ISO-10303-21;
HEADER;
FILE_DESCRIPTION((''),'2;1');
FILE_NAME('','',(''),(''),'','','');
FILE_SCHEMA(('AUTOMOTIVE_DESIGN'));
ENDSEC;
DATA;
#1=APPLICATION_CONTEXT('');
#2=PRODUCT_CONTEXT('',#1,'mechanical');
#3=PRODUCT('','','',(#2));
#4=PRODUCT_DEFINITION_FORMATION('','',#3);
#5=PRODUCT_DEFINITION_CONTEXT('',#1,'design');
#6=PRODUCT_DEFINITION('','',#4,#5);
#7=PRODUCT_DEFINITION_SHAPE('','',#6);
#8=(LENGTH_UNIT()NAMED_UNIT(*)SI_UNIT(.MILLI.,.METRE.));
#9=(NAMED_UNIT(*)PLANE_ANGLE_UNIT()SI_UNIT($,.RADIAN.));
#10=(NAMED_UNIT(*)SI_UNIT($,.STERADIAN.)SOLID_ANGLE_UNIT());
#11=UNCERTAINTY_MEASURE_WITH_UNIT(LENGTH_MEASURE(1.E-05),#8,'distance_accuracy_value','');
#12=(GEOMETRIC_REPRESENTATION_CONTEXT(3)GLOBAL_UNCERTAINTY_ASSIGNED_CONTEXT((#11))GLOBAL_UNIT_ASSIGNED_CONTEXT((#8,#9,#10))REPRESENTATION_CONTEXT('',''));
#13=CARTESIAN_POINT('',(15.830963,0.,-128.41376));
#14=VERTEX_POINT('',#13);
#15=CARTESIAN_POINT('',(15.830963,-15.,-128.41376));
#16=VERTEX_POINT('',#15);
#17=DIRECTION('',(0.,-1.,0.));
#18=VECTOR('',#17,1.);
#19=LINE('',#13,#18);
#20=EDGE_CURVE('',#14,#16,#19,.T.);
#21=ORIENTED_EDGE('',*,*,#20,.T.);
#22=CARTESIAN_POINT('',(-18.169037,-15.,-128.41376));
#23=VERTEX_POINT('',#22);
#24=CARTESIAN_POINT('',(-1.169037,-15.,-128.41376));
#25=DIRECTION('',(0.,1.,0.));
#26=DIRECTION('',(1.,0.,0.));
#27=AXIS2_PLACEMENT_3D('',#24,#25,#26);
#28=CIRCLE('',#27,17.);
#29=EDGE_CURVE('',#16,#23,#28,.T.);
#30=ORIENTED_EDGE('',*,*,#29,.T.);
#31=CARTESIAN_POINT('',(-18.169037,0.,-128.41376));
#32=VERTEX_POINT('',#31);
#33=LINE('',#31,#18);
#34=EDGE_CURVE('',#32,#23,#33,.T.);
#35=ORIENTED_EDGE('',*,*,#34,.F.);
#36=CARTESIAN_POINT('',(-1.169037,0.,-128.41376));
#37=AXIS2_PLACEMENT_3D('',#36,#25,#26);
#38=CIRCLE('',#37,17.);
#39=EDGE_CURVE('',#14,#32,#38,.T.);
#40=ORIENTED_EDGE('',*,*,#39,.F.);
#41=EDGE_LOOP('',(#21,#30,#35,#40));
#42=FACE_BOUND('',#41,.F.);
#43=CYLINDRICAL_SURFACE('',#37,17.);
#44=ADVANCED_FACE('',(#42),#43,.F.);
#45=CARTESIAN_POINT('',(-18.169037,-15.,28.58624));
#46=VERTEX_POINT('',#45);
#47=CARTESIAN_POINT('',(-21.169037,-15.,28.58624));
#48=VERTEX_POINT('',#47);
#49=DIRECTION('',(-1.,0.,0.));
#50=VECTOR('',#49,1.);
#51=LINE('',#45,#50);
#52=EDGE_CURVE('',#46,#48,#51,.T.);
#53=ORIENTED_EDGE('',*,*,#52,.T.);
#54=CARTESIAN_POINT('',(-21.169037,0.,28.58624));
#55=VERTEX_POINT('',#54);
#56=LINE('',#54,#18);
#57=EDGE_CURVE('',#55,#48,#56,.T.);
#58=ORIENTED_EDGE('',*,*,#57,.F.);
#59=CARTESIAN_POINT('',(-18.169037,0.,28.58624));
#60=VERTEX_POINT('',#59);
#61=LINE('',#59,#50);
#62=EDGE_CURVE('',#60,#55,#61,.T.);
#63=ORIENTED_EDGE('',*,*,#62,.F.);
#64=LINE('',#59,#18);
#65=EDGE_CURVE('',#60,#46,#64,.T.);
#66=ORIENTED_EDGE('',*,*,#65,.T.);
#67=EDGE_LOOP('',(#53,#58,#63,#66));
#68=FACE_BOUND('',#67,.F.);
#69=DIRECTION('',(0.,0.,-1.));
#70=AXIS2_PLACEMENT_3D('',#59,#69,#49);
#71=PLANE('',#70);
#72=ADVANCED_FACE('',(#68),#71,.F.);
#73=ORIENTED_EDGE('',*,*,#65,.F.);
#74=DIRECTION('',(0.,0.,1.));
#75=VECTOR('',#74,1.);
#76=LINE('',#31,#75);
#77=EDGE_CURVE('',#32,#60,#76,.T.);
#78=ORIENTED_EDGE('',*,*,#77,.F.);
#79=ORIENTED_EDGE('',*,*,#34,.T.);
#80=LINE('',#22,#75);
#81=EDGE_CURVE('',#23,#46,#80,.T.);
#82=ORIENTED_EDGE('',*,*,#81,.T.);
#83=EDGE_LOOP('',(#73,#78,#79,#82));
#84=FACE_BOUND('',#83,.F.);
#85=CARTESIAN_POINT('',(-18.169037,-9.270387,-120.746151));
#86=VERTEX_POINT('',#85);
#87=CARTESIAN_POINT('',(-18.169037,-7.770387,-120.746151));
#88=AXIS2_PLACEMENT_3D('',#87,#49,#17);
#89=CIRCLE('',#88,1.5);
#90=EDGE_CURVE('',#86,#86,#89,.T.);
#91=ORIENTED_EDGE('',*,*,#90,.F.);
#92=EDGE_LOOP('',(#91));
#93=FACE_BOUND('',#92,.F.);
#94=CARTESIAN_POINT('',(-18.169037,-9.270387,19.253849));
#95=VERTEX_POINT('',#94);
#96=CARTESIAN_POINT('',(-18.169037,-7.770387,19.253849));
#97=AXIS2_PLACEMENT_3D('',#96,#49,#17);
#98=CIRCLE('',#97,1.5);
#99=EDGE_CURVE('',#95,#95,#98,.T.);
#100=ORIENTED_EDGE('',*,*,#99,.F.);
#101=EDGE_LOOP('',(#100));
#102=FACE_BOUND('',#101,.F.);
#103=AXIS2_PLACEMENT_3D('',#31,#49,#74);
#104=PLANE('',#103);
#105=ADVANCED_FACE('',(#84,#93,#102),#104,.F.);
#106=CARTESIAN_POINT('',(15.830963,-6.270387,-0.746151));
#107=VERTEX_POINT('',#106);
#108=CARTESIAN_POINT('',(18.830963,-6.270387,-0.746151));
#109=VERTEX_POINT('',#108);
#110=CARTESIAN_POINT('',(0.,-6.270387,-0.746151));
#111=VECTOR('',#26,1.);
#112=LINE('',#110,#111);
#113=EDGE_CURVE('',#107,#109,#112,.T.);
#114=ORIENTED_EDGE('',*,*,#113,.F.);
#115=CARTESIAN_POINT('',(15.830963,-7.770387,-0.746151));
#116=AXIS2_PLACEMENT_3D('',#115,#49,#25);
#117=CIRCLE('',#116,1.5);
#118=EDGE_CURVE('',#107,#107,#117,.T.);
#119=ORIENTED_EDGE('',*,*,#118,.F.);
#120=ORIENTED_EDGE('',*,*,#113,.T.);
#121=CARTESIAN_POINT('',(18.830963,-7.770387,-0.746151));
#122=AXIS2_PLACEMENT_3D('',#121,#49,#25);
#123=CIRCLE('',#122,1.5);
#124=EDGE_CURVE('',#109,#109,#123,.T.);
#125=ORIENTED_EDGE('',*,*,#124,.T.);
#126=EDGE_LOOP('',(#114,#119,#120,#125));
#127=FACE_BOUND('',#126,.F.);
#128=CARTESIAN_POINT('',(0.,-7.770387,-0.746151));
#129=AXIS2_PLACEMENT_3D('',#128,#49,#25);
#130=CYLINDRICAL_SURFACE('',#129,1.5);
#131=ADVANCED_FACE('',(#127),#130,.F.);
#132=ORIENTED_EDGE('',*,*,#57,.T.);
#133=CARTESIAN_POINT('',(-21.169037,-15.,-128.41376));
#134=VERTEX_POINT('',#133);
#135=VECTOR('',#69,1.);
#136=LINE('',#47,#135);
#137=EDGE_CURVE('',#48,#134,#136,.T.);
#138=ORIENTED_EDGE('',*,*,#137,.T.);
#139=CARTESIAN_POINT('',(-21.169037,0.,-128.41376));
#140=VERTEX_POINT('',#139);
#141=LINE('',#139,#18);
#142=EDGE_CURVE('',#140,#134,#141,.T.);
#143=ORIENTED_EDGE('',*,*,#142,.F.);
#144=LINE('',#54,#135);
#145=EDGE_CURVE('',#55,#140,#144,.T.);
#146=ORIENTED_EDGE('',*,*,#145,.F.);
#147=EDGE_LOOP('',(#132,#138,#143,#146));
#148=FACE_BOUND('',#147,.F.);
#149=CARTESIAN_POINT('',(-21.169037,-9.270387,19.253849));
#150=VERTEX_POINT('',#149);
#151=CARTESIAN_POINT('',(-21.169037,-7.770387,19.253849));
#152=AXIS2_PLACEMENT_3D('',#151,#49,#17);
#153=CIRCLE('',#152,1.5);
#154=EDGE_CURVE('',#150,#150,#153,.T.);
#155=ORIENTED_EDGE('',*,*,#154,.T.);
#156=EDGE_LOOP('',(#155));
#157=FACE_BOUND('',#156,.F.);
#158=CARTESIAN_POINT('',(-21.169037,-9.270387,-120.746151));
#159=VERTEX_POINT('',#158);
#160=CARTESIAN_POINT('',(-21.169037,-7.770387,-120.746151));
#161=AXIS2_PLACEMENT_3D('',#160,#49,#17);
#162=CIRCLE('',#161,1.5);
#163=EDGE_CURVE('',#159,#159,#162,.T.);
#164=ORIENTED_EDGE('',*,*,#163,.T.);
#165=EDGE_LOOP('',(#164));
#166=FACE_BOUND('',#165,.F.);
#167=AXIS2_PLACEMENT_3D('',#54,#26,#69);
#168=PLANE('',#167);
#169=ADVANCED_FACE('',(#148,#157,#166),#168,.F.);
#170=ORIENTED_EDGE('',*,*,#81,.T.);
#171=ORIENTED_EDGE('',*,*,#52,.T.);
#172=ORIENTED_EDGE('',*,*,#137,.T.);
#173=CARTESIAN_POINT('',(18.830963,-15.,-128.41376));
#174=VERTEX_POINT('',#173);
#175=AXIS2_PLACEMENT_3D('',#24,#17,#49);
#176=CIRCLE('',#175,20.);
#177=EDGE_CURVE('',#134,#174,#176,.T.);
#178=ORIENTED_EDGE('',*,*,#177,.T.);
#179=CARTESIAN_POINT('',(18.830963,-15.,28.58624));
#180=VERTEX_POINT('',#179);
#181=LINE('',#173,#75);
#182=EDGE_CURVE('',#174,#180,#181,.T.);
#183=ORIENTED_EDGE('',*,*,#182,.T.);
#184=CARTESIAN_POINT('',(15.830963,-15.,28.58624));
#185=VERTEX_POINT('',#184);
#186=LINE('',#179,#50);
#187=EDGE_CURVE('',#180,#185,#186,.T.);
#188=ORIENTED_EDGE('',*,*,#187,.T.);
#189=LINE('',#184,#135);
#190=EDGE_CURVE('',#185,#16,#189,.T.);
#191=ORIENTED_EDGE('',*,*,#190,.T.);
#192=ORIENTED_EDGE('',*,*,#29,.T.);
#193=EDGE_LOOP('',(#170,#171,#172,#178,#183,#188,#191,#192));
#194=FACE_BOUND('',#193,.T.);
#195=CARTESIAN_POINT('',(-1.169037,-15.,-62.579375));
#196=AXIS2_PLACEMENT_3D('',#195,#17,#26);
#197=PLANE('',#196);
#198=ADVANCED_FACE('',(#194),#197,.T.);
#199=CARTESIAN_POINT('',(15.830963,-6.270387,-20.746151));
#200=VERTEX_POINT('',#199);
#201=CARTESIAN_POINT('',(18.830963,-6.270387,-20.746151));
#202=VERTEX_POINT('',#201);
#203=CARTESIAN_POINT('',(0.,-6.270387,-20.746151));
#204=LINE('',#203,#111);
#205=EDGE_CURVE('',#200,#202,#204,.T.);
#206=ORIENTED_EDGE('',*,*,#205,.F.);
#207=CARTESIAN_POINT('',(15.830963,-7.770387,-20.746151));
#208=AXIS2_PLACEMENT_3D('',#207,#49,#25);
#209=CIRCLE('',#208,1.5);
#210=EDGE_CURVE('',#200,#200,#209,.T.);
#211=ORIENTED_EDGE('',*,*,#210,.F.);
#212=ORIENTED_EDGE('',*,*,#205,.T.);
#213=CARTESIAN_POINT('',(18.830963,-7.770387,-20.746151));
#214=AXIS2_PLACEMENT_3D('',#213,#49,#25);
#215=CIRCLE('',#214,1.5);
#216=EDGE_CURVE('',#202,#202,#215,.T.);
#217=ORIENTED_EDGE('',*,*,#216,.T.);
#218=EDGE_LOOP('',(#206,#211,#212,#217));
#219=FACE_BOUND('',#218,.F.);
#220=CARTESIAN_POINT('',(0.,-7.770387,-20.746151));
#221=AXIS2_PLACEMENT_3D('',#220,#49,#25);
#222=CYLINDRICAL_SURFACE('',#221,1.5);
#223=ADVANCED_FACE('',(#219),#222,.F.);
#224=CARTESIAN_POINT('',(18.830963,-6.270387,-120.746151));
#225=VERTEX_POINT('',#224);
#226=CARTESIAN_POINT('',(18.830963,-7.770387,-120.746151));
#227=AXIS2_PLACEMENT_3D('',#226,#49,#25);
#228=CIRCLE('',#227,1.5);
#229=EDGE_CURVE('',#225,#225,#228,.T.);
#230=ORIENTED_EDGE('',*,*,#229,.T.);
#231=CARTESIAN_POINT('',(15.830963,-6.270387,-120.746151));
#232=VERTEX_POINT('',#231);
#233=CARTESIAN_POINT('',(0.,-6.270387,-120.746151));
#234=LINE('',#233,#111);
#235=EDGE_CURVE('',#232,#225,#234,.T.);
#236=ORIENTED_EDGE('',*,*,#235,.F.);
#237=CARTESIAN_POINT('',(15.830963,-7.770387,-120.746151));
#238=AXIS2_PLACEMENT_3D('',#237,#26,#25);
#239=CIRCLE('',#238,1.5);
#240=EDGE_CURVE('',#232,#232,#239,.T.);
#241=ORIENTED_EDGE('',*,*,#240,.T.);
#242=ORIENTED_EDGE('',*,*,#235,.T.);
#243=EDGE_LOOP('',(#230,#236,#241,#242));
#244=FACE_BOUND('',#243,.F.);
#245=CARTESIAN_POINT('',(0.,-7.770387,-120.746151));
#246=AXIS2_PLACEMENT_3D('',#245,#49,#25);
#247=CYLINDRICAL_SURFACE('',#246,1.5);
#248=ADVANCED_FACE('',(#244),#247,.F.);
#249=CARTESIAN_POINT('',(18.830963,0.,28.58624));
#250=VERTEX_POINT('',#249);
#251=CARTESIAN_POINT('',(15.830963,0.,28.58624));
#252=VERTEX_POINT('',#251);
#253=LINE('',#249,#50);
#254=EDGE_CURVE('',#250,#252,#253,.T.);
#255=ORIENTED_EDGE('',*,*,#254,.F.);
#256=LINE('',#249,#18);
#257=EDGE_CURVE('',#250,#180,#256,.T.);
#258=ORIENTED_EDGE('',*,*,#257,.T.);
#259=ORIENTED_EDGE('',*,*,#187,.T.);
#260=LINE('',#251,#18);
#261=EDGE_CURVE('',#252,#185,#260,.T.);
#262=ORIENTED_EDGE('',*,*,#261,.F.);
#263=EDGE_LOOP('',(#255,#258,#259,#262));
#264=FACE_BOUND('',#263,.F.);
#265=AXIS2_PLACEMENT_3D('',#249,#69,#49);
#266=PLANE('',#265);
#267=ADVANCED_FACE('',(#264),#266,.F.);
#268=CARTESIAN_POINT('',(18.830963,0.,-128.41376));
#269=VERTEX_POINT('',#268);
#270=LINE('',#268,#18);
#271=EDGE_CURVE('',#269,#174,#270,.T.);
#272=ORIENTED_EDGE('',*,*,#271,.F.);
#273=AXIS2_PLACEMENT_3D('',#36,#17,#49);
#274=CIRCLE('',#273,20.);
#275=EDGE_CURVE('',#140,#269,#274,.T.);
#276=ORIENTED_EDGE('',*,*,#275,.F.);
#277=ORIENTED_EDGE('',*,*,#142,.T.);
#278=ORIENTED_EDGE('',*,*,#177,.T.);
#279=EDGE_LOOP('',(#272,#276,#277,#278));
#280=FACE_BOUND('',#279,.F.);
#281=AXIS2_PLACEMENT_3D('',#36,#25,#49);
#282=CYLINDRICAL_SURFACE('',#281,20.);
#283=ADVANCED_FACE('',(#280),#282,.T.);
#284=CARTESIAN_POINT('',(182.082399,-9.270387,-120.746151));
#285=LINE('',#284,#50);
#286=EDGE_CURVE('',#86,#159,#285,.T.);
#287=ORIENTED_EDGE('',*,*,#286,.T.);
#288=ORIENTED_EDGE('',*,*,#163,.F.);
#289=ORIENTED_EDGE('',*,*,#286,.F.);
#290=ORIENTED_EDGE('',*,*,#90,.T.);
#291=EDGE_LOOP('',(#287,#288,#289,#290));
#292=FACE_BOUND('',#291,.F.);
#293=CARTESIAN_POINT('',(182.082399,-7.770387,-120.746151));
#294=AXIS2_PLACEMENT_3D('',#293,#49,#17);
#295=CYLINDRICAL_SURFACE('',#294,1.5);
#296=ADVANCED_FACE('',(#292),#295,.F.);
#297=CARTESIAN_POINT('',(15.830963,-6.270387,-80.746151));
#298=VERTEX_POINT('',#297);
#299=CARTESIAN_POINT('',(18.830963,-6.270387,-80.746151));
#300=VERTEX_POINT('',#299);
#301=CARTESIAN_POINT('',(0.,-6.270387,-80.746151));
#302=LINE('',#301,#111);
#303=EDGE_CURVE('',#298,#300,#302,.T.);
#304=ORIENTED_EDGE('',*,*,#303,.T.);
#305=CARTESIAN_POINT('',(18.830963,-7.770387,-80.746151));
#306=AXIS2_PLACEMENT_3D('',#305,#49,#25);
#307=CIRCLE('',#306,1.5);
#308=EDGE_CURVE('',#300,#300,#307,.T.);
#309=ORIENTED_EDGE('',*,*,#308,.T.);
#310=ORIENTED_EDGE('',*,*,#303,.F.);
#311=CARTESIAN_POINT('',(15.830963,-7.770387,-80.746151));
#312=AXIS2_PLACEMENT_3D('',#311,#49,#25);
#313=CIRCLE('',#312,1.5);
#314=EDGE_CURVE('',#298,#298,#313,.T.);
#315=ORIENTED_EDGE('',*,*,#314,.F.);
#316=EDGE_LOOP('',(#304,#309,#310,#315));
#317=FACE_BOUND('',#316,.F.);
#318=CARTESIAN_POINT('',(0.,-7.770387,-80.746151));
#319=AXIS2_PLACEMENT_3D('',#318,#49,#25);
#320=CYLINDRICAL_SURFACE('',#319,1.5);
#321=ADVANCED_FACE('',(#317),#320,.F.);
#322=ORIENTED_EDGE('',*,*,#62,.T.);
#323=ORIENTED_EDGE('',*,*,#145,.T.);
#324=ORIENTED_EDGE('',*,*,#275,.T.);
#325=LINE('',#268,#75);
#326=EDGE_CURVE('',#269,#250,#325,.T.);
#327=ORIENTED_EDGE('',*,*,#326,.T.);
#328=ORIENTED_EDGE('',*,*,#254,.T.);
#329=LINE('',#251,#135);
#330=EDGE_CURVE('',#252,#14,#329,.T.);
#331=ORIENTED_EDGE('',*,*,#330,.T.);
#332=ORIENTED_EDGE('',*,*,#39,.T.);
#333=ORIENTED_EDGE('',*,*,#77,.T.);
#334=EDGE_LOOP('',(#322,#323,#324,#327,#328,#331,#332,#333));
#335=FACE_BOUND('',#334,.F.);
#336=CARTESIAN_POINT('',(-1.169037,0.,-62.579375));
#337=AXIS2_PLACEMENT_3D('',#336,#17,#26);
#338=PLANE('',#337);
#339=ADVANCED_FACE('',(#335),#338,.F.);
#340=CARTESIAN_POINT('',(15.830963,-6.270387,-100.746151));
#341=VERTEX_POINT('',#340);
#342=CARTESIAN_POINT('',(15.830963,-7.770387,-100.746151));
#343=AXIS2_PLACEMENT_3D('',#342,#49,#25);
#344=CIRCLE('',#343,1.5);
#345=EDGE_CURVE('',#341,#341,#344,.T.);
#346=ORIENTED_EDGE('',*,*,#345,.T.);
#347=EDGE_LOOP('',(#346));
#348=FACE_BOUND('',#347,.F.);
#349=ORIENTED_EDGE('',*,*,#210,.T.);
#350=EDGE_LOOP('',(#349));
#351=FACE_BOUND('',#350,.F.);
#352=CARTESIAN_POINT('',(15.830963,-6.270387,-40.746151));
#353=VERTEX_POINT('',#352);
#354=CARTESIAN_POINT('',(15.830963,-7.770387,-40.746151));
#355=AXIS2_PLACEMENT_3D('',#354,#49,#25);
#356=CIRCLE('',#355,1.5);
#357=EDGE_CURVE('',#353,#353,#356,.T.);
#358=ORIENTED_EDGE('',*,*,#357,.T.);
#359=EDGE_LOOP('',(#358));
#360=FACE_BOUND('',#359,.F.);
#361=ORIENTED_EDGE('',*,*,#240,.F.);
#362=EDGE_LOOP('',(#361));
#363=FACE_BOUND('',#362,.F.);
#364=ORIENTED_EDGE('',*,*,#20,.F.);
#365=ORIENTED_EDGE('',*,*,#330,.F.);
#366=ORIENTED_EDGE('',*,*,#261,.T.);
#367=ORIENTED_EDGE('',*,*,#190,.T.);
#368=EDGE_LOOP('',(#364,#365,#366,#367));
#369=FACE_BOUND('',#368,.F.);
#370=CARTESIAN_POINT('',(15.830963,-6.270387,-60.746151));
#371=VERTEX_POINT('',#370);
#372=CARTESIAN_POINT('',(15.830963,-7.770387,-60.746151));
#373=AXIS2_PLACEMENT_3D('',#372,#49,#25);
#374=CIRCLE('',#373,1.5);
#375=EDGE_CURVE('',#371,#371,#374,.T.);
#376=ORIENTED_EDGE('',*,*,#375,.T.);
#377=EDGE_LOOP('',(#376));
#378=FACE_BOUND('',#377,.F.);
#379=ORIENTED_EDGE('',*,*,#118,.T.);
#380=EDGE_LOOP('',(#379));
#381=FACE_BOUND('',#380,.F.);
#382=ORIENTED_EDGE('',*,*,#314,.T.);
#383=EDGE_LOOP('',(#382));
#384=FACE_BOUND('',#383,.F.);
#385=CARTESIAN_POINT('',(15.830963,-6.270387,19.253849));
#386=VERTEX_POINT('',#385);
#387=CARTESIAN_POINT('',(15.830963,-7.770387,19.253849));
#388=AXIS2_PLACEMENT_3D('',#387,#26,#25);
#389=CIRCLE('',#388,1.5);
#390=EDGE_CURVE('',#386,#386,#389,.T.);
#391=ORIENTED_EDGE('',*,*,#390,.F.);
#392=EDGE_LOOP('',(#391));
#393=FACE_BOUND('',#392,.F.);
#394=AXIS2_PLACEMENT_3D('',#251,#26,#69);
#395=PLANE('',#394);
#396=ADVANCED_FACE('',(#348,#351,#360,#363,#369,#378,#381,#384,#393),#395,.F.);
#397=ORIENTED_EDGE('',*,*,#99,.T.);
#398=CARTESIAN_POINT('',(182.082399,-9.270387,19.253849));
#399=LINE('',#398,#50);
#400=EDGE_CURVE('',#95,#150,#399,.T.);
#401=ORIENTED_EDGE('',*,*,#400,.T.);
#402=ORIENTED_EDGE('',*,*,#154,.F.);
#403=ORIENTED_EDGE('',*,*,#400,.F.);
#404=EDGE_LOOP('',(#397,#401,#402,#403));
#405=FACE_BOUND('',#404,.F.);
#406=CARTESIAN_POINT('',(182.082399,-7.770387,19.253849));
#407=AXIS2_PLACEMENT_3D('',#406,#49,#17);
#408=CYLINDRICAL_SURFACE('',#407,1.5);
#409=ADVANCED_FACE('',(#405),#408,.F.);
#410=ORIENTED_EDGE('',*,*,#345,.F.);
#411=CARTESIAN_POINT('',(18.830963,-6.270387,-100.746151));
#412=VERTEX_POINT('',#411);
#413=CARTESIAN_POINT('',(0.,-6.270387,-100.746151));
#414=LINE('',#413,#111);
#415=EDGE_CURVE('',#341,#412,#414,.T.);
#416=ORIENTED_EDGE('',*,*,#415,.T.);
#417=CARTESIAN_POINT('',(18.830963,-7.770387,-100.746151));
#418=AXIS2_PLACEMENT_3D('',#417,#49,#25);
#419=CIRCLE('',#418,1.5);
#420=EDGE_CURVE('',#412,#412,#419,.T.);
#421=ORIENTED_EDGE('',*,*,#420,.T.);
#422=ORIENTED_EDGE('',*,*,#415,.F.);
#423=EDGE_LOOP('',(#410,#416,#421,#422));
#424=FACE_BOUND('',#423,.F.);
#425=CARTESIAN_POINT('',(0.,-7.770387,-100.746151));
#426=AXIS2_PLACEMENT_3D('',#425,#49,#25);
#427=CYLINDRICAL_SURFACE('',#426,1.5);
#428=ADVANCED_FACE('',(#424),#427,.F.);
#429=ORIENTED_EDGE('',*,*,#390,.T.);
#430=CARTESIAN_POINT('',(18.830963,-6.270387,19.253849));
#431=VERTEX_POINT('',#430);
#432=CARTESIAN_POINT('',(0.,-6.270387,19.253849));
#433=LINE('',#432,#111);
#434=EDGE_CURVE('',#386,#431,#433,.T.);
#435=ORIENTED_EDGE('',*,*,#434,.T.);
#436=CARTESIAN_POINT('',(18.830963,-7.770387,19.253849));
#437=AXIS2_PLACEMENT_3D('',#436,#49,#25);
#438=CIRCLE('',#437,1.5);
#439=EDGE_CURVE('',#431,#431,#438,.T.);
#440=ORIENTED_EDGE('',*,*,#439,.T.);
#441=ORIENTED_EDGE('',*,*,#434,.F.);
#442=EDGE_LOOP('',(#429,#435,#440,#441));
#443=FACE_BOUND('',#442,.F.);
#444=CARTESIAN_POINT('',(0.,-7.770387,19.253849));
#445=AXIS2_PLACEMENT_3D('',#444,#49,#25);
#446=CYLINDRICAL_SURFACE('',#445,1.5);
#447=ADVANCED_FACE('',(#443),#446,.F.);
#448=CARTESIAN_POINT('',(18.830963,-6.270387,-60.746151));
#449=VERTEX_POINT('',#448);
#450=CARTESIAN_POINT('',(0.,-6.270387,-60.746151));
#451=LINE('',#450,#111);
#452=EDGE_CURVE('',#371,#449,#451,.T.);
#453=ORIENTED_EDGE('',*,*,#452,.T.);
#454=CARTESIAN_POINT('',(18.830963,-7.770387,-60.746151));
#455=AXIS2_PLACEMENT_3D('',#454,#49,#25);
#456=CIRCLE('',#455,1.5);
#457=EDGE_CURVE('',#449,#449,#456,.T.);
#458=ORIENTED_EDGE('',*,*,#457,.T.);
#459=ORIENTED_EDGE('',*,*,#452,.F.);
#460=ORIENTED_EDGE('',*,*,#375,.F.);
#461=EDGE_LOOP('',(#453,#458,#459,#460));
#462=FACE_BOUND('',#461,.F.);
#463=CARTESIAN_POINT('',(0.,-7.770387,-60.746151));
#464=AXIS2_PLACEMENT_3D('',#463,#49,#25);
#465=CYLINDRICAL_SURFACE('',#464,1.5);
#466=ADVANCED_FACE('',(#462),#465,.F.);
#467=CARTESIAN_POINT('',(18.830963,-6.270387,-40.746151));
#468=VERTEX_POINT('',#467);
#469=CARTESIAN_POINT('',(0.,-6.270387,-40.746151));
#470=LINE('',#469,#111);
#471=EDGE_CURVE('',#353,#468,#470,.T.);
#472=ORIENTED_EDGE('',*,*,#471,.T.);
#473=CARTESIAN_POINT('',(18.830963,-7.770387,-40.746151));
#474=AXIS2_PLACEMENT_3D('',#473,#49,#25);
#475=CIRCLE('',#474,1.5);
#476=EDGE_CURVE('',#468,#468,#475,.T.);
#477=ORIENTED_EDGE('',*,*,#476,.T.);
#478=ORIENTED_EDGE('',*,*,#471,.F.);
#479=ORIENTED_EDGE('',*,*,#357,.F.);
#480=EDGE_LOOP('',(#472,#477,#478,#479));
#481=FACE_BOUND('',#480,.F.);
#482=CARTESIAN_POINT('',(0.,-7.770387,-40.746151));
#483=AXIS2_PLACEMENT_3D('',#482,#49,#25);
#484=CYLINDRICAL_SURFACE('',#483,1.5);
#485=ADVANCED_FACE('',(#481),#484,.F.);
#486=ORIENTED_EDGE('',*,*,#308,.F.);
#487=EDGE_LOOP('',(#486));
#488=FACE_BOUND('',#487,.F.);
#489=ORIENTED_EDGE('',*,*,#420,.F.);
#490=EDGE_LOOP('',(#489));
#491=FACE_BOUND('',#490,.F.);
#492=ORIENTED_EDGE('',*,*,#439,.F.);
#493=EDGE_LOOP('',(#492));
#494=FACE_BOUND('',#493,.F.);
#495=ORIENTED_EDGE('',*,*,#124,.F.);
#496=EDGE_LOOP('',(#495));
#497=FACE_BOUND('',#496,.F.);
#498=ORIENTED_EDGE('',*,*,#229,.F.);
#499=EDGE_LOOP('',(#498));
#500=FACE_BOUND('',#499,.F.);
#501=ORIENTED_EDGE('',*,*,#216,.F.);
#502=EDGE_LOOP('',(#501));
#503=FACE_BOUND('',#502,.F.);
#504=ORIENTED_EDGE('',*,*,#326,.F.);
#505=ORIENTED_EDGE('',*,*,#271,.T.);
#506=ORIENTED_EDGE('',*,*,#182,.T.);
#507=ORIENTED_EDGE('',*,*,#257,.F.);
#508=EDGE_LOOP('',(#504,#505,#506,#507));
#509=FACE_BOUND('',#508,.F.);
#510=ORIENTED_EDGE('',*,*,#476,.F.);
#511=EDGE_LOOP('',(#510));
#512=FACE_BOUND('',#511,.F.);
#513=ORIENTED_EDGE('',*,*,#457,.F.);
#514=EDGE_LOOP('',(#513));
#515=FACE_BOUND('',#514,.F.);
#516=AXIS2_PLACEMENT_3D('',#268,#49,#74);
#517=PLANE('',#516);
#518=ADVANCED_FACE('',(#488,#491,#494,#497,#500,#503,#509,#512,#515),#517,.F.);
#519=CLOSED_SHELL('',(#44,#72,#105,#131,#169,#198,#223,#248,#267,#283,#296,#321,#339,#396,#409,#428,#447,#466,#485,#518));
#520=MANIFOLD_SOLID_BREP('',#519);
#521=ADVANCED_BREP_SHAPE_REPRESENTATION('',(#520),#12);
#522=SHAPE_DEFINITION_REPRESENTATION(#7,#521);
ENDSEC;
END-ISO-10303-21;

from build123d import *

# Parameters (mm, degrees)
F1_DEPTH = 15
F3_D     = 3
F3_DEPTH = 18.8319625536
F4_D     = 3


# Not quite as in the source:
# - a feature names something its author has since deleted; it is built from what else it names


with BuildPart() as f1:
    # F0 (on Front) → F1 (new body)
    with BuildSketch(Plane.XZ):
        with BuildLine():
            Line((-18.1690374464, 28.586239934), (-21.1690374464, 28.586239934))
            Line((-21.1690374464, 28.586239934), (-21.1690374464, -128.413760066))
            ThreePointArc((-21.1690374464, -128.413760066), (-1.1690374464, -148.413760066), (18.8309625536, -128.413760066))
            Line((18.8309625536, -128.413760066), (18.8309625536, 28.586239934))
            Line((18.8309625536, 28.586239934), (15.8309625536, 28.586239934))
            Line((15.8309625536, 28.586239934), (15.8309625536, -128.413760066))
            ThreePointArc((15.8309625536, -128.413760066), (-1.1690374464, -145.413760066), (-18.1690374464, -128.413760066))
            Line((-18.1690374464, -128.413760066), (-18.1690374464, 28.586239934))
        make_face()
    extrude(amount=F1_DEPTH)

    # F3 (through all, one way)
    with BuildSketch(Plane(origin=(0, 0, 0), x_dir=(0, 1, 0), z_dir=(-1, 0, 0))):
        with Locations((-7.7703874558, 0.7461506128), (-7.7703874558, 20.7461506128), (-7.7703874558, 40.7461506128), (-7.7703874558, 60.7461506128), (-7.7703874558, 80.7461506128), (-7.7703874558, 100.7461506128), (-7.7703874558, 120.7461506128), (-7.7703874558, -19.2538493872)):
            Circle(F3_D / 2)
    extrude(amount=-F3_DEPTH, mode=Mode.SUBTRACT)

    # F4 (through all)
    with Locations(Plane.YZ):
        with Locations((-7.7703874558, 19.2538493872), (-7.7703874558, -120.7461506128)):
            Hole(F4_D / 2)


solid = f1.part
